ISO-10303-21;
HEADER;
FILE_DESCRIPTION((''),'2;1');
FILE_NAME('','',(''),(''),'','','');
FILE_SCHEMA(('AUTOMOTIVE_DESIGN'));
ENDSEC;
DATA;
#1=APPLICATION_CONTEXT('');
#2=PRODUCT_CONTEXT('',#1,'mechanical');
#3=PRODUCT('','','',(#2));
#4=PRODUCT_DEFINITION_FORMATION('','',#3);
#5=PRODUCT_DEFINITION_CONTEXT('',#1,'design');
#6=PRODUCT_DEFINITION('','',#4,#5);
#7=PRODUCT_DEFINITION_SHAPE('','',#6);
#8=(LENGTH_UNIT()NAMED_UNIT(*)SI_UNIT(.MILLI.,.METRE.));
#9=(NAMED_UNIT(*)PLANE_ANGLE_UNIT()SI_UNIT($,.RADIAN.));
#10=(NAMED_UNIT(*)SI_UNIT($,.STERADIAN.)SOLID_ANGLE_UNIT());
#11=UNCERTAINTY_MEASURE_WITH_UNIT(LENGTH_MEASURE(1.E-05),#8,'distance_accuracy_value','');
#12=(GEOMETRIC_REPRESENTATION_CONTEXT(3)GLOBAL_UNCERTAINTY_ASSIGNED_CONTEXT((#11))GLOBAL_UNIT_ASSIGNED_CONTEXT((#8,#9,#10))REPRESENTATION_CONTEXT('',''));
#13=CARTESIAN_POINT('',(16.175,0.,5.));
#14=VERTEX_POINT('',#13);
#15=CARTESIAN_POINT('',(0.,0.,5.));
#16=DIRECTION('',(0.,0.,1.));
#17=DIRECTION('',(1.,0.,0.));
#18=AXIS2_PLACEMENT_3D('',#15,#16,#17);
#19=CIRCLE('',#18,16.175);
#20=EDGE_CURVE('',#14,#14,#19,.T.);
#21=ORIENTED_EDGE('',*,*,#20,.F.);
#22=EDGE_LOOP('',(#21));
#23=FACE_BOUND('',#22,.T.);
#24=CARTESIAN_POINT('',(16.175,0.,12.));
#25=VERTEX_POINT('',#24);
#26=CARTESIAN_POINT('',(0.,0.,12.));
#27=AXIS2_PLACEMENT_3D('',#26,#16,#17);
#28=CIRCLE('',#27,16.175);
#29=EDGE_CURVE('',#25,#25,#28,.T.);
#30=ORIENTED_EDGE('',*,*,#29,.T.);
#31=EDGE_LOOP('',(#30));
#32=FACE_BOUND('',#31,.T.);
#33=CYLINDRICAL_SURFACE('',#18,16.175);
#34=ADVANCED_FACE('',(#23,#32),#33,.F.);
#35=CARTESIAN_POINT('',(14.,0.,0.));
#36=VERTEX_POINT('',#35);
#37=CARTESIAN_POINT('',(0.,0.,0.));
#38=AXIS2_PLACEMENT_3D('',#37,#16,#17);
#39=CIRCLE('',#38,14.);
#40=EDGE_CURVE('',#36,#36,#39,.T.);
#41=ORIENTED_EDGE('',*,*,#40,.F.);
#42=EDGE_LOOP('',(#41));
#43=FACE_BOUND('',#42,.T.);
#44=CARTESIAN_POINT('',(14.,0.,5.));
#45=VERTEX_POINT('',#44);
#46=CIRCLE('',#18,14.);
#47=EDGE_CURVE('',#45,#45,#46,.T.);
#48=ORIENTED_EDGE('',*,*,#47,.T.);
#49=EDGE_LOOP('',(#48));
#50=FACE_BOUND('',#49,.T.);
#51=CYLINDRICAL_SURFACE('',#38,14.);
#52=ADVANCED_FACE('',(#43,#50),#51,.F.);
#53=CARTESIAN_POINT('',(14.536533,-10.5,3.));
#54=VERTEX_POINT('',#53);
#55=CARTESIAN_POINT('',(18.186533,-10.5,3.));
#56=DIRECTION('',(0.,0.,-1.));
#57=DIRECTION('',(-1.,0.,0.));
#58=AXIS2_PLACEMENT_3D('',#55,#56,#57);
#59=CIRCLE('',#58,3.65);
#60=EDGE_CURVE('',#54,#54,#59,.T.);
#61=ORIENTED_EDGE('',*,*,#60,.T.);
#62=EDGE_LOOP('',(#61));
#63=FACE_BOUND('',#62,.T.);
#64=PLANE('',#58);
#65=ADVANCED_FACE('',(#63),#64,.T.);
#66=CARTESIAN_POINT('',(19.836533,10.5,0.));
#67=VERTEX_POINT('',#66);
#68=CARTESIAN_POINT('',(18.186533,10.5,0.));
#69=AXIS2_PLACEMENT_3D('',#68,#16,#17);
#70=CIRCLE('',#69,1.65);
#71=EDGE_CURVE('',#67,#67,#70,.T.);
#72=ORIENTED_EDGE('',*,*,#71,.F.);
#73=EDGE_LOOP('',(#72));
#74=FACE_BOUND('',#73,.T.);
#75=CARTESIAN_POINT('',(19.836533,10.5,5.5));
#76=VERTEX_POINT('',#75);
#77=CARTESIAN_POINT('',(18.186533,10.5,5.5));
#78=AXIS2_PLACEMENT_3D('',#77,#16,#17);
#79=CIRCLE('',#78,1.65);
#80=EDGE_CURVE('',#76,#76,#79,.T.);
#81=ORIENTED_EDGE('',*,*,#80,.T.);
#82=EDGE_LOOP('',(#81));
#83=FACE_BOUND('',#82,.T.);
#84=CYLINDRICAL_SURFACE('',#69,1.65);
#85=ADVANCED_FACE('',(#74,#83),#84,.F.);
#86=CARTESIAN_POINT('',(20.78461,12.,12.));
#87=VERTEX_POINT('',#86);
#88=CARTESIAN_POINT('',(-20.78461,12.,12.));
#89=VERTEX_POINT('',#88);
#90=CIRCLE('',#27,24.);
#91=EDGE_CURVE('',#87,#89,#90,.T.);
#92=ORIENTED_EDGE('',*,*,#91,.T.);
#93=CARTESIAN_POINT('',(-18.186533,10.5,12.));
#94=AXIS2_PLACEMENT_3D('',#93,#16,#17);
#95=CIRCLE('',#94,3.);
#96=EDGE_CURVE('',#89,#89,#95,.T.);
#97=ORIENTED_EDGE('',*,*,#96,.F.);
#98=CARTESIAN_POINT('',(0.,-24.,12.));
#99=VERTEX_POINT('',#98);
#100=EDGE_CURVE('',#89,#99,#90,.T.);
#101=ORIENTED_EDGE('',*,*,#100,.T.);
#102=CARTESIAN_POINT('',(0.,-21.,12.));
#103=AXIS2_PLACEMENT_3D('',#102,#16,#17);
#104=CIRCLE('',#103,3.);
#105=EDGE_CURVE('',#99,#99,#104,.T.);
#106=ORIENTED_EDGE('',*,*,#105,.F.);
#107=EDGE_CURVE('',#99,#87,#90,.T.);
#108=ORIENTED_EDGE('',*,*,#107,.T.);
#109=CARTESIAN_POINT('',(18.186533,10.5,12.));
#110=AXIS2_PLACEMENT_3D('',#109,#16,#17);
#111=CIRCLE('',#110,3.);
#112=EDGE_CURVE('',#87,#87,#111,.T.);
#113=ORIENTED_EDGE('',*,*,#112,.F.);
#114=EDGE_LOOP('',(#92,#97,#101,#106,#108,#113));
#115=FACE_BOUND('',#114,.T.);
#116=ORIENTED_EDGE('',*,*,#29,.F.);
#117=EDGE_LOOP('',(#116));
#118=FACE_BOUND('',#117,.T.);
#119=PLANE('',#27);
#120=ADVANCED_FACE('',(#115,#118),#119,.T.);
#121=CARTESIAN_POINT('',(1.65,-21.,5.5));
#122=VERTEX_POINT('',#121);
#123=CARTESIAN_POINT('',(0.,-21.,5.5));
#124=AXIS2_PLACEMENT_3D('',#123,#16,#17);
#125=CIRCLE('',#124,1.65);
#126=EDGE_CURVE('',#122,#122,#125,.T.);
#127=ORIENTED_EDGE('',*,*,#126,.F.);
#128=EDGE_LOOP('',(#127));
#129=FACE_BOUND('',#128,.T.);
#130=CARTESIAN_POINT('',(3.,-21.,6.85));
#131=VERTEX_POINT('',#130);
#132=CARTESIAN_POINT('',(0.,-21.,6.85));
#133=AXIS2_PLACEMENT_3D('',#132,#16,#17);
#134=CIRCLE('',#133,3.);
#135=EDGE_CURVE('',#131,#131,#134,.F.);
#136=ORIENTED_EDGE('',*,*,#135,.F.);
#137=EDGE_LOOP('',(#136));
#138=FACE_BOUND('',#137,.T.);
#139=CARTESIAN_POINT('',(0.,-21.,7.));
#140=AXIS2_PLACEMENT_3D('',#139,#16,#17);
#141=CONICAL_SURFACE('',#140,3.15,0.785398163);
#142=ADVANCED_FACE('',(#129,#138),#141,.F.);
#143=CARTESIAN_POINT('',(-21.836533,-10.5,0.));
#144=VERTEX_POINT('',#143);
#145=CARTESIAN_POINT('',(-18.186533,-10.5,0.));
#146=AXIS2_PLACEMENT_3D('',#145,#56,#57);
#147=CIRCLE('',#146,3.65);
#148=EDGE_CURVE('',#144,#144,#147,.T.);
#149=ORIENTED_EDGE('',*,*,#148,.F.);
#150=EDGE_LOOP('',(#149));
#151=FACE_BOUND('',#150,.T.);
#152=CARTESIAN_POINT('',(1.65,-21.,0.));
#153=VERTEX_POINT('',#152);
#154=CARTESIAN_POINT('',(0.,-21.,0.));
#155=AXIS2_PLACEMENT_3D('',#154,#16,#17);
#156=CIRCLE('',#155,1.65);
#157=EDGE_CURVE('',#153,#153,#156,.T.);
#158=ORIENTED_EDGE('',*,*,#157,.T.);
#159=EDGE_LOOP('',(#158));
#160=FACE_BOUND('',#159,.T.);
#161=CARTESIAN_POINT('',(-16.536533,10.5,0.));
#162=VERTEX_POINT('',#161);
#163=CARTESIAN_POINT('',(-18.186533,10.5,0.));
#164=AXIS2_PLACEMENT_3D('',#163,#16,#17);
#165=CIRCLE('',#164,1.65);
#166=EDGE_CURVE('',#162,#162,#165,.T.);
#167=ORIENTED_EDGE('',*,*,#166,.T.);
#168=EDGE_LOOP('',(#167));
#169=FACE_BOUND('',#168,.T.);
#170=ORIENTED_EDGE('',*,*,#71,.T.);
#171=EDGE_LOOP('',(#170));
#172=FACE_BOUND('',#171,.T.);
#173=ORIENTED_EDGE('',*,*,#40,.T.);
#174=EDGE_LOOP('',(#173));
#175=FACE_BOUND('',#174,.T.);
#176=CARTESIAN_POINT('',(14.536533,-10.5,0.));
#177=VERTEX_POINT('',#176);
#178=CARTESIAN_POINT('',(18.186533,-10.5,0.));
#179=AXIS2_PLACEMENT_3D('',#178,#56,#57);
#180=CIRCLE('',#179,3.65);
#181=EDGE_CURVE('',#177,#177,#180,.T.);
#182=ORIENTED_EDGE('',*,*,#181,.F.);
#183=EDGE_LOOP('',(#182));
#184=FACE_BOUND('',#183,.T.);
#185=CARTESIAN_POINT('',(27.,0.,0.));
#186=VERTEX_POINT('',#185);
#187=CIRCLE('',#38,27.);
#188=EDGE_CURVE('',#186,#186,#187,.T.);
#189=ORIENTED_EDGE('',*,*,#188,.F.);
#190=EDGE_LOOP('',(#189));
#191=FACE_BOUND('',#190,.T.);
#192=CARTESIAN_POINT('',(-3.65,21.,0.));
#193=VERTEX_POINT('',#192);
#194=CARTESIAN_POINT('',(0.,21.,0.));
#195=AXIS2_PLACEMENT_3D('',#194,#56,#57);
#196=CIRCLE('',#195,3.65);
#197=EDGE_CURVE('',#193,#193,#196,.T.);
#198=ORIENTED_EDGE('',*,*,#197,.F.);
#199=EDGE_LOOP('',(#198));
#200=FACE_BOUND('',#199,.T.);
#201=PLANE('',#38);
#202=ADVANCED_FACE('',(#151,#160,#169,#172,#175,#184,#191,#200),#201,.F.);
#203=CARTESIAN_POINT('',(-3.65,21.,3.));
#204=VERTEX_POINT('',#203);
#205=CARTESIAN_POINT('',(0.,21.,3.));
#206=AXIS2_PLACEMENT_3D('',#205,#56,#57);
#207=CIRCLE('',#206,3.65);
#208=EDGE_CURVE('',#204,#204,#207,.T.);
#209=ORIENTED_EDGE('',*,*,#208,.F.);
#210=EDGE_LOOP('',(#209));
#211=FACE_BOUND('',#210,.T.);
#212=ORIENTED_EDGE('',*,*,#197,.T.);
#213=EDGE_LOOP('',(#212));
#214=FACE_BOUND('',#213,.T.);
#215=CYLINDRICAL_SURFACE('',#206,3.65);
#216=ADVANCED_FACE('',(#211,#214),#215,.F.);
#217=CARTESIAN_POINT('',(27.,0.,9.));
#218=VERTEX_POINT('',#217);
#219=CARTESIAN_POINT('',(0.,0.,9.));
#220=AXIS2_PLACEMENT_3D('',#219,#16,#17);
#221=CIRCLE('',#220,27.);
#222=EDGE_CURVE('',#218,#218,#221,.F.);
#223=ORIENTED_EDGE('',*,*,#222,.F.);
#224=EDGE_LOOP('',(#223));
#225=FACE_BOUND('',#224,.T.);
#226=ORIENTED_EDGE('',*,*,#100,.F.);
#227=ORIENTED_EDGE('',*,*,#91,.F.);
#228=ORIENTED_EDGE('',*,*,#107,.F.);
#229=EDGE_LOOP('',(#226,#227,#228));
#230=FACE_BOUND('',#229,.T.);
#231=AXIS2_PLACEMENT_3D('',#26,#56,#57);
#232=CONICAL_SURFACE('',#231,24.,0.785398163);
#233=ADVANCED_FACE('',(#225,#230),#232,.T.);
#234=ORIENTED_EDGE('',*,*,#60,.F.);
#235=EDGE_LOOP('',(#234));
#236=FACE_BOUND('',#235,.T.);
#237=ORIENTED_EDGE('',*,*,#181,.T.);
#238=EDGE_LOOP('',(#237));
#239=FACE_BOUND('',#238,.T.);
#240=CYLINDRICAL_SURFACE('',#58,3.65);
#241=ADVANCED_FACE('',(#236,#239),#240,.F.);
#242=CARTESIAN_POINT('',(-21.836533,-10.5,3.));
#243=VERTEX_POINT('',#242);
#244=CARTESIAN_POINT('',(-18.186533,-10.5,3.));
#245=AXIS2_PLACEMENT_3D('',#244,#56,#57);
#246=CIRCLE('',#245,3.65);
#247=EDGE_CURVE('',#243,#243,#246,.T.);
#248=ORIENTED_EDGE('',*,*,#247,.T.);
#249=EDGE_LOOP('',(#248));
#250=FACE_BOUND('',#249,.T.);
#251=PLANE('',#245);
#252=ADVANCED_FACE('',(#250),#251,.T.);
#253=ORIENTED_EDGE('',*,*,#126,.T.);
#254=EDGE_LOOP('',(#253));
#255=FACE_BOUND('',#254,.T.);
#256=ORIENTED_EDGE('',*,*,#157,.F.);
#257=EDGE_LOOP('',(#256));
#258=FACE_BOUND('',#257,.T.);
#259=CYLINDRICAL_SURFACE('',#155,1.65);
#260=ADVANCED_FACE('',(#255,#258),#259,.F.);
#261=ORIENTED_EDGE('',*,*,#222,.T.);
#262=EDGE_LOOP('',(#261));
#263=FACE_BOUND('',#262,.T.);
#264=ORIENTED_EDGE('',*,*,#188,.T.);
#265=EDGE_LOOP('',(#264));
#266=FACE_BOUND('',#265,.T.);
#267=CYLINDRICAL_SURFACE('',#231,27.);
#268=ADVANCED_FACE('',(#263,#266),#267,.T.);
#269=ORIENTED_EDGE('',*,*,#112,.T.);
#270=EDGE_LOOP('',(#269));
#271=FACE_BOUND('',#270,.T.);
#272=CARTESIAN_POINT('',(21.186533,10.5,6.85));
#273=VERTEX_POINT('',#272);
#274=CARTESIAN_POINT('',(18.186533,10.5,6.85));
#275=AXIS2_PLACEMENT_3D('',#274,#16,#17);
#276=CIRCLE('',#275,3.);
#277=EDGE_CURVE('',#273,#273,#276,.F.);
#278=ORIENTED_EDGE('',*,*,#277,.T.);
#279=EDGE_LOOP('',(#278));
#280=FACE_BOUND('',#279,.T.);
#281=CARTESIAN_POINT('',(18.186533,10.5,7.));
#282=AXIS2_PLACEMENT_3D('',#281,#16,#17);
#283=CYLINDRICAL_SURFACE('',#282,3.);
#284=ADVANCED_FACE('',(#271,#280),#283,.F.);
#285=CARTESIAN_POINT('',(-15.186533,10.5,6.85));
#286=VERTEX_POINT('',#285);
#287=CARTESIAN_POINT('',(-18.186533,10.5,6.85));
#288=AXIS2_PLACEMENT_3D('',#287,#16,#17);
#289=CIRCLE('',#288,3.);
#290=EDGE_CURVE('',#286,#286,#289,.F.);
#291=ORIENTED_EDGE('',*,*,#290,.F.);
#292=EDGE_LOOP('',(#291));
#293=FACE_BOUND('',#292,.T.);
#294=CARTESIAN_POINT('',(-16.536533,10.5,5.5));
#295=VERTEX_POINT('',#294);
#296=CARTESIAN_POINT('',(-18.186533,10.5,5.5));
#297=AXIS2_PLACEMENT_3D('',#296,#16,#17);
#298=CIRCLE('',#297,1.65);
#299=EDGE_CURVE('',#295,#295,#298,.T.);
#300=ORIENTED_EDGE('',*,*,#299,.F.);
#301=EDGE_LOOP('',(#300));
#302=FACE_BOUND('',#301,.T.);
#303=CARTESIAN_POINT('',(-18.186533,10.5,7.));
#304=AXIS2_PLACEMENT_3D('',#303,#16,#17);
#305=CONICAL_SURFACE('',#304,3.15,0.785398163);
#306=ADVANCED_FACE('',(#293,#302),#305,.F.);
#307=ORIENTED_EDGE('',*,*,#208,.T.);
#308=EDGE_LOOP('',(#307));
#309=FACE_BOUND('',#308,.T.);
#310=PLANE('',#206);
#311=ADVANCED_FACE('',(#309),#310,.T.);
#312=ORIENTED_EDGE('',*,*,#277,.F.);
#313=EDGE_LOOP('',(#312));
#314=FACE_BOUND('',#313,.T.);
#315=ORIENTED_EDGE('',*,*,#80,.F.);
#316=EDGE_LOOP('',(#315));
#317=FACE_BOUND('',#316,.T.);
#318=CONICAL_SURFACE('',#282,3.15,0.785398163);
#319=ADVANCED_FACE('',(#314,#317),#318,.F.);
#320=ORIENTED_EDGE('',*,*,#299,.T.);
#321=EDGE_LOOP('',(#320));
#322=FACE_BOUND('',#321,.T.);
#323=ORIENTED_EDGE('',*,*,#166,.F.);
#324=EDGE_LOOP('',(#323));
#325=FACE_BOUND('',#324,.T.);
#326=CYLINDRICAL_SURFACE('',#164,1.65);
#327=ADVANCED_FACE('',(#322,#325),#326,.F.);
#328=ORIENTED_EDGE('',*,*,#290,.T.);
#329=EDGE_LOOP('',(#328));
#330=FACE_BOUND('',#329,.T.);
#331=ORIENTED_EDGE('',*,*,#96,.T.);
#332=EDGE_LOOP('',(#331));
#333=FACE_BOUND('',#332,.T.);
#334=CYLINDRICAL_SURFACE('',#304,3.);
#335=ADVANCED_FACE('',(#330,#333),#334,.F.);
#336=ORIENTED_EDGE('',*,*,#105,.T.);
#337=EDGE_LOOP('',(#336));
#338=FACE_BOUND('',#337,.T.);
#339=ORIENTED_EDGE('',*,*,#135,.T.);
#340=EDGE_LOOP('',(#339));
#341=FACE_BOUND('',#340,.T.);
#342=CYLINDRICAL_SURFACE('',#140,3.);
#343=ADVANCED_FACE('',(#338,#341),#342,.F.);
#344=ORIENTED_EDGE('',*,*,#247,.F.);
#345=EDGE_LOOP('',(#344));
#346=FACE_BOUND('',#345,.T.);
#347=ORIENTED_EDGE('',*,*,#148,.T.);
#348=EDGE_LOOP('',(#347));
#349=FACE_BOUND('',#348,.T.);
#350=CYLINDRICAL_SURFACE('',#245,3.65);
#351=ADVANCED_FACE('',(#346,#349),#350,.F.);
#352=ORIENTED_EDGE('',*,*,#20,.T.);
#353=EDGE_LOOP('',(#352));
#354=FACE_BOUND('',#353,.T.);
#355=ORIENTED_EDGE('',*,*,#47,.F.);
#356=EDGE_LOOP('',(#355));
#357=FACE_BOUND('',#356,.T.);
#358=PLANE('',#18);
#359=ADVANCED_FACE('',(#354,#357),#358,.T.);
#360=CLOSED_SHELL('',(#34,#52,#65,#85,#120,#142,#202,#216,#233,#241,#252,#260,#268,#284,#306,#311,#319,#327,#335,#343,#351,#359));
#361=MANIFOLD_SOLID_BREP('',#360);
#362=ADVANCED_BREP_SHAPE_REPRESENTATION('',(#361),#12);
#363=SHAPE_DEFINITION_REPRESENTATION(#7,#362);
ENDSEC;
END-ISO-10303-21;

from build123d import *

# Parameters (mm, degrees)
SKETCH_1_R             = 27
EXTRUDE_420_DEPTH      = 12
SKETCH_2_R             = 16.175
CUT_EXTRUDE_563_DEPTH  = 7
SKETCH_3_R             = 14
CUT_EXTRUDE_654_DEPTH  = 39.820097888
SKETCH_5_R             = 1.65
CUT_EXTRUDE_1017_DEPTH = 41.024992192
SKETCH_6_R             = 3
CUT_EXTRUDE_1196_DEPTH = 5
CHAMFER_1_SIZE         = 1.5
CHAMFER_2_SIZE         = 3
SKETCH_8_R             = 3.65
CUT_EXTRUDE_1692_DEPTH = 3


# Some blends are built 0.0001 mm under size
with BuildPart() as part:
    # Эскиз1 → Extrude 420 (new body)
    with BuildSketch(Plane.XY):
        Circle(SKETCH_1_R)
    extrude(amount=EXTRUDE_420_DEPTH)

    # Эскиз2 → Cut-Extrude 563 (cut)
    with BuildSketch(Plane.XY.offset(12)):
        Circle(SKETCH_2_R)
    extrude(amount=-CUT_EXTRUDE_563_DEPTH, mode=Mode.SUBTRACT)

    # Эскиз3 → Cut-Extrude 654 (cut, through all)
    with BuildSketch(Plane.XY.offset(5)):
        Circle(SKETCH_3_R)
    extrude(amount=-CUT_EXTRUDE_654_DEPTH, mode=Mode.SUBTRACT)

    # Эскиз5 → Cut-Extrude 1017 (cut, through all)
    with BuildSketch(Plane.XY.offset(12)):
        with Locations((-18.186533479, 10.5)):
            Circle(SKETCH_5_R)
        with Locations((18.186533479, 10.5)):
            Circle(SKETCH_5_R)
        with Locations((0, -21)):
            Circle(SKETCH_5_R)
    extrude(amount=-CUT_EXTRUDE_1017_DEPTH, mode=Mode.SUBTRACT)

    # Эскиз6 → Cut-Extrude 1196 (cut)
    with BuildSketch(Plane.XY.offset(12)):
        with Locations((-18.186533479, 10.5)):
            Circle(SKETCH_6_R)
        with Locations((18.186533479, 10.5)):
            Circle(SKETCH_6_R)
        with Locations((0, -21)):
            Circle(SKETCH_6_R)
    extrude(amount=-CUT_EXTRUDE_1196_DEPTH, mode=Mode.SUBTRACT)

    # Фаска1
    # the kernel refuses this chamfer: 1.5 mm, written as the material it takes off along each edge
    with BuildSketch(Plane(origin=(0, -21, 7), x_dir=(1, 0, 0), z_dir=(0, -1, 0))) as chamfer_1_piece_1_section:
        Polygon((1.65, -CHAMFER_1_SIZE), (1.65 + CHAMFER_1_SIZE, 0), (1.65, 0), align=None)
    chamfer_1_piece_1 = revolve(axis=Axis((0, -21, 7), (0, 0, 1)), mode=Mode.PRIVATE)
    chamfer_1_piece_1 = chamfer_1_piece_1 & Plane(origin=(0, -21, 6.171694066), x_dir=(1, 0, 0), z_dir=(0, 0, 1)) * Cylinder(3, 13, mode=Mode.PRIVATE)
    add(chamfer_1_piece_1, mode=Mode.SUBTRACT)
    with BuildSketch(Plane(origin=(18.186533479, 10.5, 7), x_dir=(1, 0, 0), z_dir=(0, -1, 0))) as chamfer_1_piece_2_section:
        Polygon((1.65, -CHAMFER_1_SIZE), (1.65 + CHAMFER_1_SIZE, 0), (1.65, 0), align=None)
    chamfer_1_piece_2 = revolve(axis=Axis((18.186533479, 10.5, 7), (0, 0, 1)), mode=Mode.PRIVATE)
    chamfer_1_piece_2 = chamfer_1_piece_2 & Plane(origin=(18.186533479, 10.5, 6.171694066), x_dir=(1, 0, 0), z_dir=(0, 0, 1)) * Cylinder(3, 13, mode=Mode.PRIVATE)
    add(chamfer_1_piece_2, mode=Mode.SUBTRACT)
    with BuildSketch(Plane(origin=(-18.186533479, 10.5, 7), x_dir=(1, 0, 0), z_dir=(0, -1, 0))) as chamfer_1_piece_3_section:
        Polygon((1.65, -CHAMFER_1_SIZE), (1.65 + CHAMFER_1_SIZE, 0), (1.65, 0), align=None)
    chamfer_1_piece_3 = revolve(axis=Axis((-18.186533479, 10.5, 7), (0, 0, 1)), mode=Mode.PRIVATE)
    chamfer_1_piece_3 = chamfer_1_piece_3 & Plane(origin=(-18.186533479, 10.5, 6.171694066), x_dir=(1, 0, 0), z_dir=(0, 0, 1)) * Cylinder(3, 13, mode=Mode.PRIVATE)
    add(chamfer_1_piece_3, mode=Mode.SUBTRACT)

    # Фаска2
    chamfer_2_edges = [part.edges().sort_by_distance(p)[0] for p in [
        (-27, 0, 12),
    ]]
    chamfer(chamfer_2_edges, length=CHAMFER_2_SIZE - 0.0001)  # a hair under: the kernel refuses the full size

    # Эскиз8 → Cut-Extrude 1692 (cut)
    with BuildSketch(Plane(origin=(0, 0, 0), x_dir=(-1, 0, 0), z_dir=(0, 0, -1))):
        with Locations((0, 21)):
            Circle(SKETCH_8_R)
        with Locations((-18.186533479, -10.5)):
            Circle(SKETCH_8_R)
        with Locations((18.186533479, -10.5)):
            Circle(SKETCH_8_R)
    extrude(amount=-CUT_EXTRUDE_1692_DEPTH, mode=Mode.SUBTRACT)


solid = part.part
